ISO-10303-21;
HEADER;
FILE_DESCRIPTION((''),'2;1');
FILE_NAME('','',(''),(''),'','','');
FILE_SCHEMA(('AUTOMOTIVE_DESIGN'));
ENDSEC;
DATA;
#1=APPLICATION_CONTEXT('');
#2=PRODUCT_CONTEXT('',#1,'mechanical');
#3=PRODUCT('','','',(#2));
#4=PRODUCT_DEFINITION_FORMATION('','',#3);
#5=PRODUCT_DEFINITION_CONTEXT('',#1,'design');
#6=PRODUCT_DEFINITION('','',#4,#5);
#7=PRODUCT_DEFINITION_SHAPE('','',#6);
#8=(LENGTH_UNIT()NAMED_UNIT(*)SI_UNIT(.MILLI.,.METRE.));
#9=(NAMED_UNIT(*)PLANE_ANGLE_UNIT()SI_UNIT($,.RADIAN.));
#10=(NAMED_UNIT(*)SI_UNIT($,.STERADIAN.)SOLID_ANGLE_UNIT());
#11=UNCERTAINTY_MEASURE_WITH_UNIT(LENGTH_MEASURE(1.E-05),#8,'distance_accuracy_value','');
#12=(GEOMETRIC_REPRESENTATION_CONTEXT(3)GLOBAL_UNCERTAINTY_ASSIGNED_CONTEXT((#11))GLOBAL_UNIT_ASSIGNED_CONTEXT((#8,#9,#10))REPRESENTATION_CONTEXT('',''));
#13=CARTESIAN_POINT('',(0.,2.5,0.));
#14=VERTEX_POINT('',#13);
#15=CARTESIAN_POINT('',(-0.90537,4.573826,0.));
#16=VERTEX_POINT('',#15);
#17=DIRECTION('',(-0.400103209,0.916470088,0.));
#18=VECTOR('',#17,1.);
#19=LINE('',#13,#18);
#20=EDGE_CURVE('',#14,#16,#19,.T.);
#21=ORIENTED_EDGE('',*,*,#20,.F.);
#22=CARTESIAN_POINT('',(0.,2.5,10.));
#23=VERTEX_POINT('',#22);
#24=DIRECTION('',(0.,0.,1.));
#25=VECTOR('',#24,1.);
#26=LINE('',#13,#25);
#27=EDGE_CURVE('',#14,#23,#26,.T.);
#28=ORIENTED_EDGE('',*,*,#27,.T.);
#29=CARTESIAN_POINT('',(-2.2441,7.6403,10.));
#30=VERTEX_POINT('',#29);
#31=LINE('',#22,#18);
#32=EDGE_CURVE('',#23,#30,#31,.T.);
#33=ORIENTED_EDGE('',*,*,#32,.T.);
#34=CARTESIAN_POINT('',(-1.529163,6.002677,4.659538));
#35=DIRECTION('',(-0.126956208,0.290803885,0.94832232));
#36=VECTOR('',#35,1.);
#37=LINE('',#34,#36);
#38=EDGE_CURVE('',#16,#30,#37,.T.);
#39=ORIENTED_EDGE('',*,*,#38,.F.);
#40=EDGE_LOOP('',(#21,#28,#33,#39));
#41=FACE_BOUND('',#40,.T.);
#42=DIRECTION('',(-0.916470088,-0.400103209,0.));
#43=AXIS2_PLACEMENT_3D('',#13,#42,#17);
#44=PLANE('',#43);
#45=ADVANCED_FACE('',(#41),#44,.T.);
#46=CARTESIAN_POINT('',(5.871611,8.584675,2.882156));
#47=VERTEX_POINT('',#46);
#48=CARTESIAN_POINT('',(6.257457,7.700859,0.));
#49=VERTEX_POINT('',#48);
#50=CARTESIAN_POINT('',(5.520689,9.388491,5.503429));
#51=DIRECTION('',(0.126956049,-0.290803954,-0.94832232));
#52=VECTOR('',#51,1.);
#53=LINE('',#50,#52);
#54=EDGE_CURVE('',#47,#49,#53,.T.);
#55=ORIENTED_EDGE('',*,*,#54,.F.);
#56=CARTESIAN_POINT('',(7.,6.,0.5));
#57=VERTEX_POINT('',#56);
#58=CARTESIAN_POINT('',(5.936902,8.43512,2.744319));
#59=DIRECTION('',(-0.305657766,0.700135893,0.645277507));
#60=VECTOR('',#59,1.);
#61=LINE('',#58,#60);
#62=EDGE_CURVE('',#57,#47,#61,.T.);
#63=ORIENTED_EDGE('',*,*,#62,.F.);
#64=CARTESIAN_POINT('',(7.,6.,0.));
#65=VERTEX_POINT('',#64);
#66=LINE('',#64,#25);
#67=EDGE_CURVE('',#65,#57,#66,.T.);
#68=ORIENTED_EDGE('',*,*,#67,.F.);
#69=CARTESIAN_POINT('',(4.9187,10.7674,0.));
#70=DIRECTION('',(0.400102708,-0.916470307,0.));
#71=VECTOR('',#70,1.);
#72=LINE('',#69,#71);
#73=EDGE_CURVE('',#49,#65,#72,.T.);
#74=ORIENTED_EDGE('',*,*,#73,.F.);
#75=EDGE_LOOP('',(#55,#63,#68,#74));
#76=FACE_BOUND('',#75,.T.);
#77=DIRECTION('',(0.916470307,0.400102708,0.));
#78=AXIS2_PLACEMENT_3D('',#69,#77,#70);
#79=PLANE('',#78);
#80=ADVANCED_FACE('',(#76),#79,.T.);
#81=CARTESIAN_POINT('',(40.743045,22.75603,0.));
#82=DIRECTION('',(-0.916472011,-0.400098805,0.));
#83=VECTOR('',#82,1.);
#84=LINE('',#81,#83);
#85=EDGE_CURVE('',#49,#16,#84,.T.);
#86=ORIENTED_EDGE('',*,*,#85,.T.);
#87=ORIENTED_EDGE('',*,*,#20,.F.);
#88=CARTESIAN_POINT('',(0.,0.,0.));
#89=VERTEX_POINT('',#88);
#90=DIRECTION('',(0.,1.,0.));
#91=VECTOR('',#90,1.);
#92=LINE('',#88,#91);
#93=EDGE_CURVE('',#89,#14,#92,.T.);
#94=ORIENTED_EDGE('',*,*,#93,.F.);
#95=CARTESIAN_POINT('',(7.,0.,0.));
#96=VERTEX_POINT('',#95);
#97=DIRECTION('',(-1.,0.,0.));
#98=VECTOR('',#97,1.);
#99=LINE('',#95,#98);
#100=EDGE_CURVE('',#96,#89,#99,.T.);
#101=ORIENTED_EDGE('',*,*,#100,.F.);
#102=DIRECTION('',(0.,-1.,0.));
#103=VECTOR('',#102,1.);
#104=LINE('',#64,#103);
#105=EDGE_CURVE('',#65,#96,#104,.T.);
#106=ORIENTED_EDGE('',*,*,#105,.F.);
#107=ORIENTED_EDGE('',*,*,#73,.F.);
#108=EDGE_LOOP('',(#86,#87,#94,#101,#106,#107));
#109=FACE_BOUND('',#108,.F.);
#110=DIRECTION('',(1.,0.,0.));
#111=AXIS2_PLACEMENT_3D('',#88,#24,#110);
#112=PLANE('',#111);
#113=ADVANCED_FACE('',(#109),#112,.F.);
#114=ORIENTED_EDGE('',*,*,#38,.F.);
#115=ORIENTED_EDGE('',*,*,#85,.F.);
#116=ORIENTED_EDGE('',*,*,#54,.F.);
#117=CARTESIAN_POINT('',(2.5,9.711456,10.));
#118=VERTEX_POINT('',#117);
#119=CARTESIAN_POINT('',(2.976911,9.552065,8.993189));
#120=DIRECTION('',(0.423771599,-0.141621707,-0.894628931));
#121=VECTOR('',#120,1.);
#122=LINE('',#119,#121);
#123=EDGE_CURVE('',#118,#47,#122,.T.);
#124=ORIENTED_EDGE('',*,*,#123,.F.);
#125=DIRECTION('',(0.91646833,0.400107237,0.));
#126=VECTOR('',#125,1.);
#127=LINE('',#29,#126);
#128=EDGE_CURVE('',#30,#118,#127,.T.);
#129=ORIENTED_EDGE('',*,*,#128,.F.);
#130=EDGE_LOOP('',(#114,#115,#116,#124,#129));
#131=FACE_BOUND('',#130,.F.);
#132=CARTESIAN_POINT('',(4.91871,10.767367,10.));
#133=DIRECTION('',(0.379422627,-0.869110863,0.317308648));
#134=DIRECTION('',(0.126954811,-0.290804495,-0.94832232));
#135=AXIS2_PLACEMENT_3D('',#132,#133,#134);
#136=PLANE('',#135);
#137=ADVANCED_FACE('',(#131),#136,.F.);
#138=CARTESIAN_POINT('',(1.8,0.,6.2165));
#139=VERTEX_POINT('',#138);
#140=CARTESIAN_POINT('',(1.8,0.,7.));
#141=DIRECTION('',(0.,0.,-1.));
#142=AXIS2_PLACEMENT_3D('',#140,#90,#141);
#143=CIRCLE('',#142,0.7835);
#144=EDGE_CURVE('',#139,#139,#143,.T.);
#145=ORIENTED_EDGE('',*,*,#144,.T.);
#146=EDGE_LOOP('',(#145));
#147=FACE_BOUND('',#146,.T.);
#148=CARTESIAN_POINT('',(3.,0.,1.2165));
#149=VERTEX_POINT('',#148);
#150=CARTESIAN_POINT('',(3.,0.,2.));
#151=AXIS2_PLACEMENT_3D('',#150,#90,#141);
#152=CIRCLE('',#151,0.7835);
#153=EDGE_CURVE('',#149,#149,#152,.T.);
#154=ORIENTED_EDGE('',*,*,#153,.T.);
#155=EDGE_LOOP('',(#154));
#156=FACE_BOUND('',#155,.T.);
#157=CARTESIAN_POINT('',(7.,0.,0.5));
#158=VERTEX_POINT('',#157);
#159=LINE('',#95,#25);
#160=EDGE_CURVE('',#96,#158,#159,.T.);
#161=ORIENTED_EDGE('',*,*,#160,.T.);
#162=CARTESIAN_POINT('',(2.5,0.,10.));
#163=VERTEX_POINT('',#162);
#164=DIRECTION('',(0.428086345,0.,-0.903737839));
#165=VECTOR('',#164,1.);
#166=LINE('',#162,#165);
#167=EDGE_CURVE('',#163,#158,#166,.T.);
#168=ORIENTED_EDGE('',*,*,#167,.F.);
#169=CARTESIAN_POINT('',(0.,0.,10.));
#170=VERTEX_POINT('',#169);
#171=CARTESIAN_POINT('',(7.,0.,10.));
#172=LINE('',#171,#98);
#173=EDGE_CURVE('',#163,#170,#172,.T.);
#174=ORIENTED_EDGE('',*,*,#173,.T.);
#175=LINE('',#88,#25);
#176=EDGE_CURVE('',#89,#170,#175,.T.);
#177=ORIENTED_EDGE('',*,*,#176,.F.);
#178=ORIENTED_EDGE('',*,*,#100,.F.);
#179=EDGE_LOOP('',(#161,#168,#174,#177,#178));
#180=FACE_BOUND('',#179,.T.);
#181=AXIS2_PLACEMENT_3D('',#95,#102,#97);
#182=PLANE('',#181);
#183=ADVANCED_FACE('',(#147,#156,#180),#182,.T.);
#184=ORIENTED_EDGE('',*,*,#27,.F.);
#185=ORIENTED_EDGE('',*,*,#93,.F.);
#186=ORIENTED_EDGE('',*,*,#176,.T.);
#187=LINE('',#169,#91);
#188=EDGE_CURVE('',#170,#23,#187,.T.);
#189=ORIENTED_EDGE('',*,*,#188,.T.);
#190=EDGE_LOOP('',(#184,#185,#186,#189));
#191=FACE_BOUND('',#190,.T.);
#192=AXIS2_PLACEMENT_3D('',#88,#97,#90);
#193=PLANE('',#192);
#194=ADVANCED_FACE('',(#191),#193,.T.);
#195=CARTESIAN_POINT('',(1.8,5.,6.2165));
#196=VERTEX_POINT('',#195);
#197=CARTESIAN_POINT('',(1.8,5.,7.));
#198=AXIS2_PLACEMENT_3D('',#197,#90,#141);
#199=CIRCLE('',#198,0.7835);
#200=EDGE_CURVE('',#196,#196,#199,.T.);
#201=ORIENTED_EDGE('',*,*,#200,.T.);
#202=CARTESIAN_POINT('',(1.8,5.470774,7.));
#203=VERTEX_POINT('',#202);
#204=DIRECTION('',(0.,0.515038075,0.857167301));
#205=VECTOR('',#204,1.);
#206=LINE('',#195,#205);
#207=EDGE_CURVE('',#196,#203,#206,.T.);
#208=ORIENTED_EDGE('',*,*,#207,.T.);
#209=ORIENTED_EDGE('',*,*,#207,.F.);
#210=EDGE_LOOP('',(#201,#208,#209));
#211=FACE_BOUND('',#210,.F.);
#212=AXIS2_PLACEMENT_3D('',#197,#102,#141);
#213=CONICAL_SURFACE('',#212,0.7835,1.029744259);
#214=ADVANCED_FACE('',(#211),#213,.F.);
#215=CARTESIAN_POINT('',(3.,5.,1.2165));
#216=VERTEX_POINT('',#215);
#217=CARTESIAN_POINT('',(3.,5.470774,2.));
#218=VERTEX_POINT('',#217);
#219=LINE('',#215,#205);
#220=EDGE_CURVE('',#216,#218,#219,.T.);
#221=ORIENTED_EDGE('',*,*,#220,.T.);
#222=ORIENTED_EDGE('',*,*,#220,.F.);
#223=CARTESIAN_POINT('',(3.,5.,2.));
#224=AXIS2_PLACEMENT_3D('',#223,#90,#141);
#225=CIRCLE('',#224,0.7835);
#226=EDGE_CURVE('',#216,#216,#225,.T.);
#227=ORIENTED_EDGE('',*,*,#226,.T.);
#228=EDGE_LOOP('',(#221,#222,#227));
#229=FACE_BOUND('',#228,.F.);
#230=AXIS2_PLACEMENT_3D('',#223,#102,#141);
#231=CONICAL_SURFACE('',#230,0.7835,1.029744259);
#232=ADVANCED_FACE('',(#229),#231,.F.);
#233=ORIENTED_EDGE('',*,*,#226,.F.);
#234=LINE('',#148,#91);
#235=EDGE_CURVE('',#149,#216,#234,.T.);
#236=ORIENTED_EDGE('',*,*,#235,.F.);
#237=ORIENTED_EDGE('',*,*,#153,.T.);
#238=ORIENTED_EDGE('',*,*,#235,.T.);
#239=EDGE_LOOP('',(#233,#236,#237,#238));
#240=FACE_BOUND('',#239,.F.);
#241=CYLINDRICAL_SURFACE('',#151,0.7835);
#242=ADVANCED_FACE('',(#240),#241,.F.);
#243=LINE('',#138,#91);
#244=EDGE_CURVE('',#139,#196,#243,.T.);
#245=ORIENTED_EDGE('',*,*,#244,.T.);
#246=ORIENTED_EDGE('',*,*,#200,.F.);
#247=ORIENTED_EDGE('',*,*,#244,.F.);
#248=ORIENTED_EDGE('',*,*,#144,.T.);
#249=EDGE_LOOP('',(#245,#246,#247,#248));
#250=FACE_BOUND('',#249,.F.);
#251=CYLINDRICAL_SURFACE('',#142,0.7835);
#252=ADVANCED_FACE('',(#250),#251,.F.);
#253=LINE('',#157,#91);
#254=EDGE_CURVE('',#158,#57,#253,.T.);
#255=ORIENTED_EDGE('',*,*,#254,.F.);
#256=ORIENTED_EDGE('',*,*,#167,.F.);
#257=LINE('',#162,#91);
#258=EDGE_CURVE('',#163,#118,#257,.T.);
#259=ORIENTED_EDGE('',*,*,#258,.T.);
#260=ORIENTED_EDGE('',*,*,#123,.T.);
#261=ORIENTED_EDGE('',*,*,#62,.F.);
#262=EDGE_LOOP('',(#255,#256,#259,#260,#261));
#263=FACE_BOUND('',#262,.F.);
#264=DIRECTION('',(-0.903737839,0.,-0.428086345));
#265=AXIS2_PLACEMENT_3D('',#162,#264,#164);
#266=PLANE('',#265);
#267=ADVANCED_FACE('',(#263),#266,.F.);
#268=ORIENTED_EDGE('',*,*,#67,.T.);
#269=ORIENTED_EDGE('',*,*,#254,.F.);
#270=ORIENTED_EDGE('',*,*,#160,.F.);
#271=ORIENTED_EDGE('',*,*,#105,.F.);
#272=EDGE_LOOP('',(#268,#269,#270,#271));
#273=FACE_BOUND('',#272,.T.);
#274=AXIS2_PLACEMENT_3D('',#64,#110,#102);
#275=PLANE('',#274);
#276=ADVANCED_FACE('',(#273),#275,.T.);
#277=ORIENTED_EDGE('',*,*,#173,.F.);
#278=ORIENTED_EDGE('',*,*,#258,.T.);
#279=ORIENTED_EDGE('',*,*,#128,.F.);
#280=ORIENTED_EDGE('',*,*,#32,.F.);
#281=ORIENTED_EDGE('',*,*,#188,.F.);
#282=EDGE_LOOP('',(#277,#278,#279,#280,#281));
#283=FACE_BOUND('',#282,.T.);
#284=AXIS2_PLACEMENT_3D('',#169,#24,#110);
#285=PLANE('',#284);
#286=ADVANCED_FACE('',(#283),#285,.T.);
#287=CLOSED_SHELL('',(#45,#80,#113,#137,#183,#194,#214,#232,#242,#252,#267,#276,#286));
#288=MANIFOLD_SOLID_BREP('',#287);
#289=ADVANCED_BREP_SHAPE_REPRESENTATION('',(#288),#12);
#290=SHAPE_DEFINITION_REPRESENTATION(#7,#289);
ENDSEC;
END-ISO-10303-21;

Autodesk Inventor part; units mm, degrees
ref_plane "YZ Plane" through (0, 0, 0) normal (1, 0, 0) x (0, 1, 0)
ref_plane "XZ Plane" through (0, 0, 0) normal (0, 1, 0) x (-1, 0, 0)
ref_plane "XY Plane" through (0, 0, 0) normal (0, 0, 1) x (1, 0, 0)
sketch "Sketch1" plane through (0, 0, 0) normal (0, 0, 1) x (1, 0, 0)
  line L0 (0, 0) -> (0, 2.5)
  line L1 (0, 2.5) -> (-2.2441, 7.6403)
  line L2 (-2.2441, 7.6403) -> (4.9187, 10.7674)
  line L3 (4.9187, 10.7674) -> (7, 6)
  line L4 (7, 6) -> (7, 0)
  line L5 (7, 0) -> (0, 0)
  dimension "d5" = 23.584
  dimension "d6" = 2.5
  dimension "d7" = 7
  dimension "d9" = 6
  dimension "d14" = 7.9
extrude "Extrusion1" add sketch "Sketch1" along normal blind 10
sketch "Sketch2" plane through (6.9048, 6.218, 0) normal (-0.916472, -0.4000988, 0) x (0, 0, 1)
  line L0 (0, 4.964) -> (10, 4.964) projected
  line L1 (10, 4.964) -> (10, -0.6448) projected
  line L2 (10, 4.964) -> (0, 1.618)
  line L3 (0, 1.618) -> (0, 4.964)
  point P0 (0, -2.936)
  dimension "d2" = 18.5
extrude "Extrusion2" cut sketch "Sketch2" along normal through all both and the other way through all
sketch "Sketch3" plane through (0, 0, 0) normal (0, -1, 0) x (1, 0, 0)
  line L0 (7, 0) -> (0, 0) projected
  line L1 (7, 0) -> (7, 10) projected
  line L2 (0, 10) -> (7, 10) projected
  line L3 (0, 0) -> (0, 10) projected
  line L4 (2.5, 10) -> (7, 0.5)
  dimension "d12" = 2.5
  dimension "d13" = 0.5
extrude "Extrusion3" cut sketch "Sketch3" against normal through all contours L4 L2 L1
sketch "Sketch4" plane through (0, 0, 0) normal (0, -1, 0) x (1, 0, 0)
  point P0 (0, 0)
  point P1 (3, 2)
  point P2 (1.8, 7)
  dimension "d22" = 3
  dimension "d23" = 2
  dimension "d24" = 7
  dimension "d25" = 1.8
hole "Hole1" at (3, 0, 2) at (1.8, 0, 7) direction (0, 1, 0) diameter 1.567 depth 5 tip angle 118 thread size "M2x0.4" class "6H" standard "ANSI Metric M Profile"
equation "\"d5\" = thumb_axis_beta_local"
equation "\"thumb_axis_beta_local\" = thumb_axis_beta"
properties part number "CMC extension endstop"
